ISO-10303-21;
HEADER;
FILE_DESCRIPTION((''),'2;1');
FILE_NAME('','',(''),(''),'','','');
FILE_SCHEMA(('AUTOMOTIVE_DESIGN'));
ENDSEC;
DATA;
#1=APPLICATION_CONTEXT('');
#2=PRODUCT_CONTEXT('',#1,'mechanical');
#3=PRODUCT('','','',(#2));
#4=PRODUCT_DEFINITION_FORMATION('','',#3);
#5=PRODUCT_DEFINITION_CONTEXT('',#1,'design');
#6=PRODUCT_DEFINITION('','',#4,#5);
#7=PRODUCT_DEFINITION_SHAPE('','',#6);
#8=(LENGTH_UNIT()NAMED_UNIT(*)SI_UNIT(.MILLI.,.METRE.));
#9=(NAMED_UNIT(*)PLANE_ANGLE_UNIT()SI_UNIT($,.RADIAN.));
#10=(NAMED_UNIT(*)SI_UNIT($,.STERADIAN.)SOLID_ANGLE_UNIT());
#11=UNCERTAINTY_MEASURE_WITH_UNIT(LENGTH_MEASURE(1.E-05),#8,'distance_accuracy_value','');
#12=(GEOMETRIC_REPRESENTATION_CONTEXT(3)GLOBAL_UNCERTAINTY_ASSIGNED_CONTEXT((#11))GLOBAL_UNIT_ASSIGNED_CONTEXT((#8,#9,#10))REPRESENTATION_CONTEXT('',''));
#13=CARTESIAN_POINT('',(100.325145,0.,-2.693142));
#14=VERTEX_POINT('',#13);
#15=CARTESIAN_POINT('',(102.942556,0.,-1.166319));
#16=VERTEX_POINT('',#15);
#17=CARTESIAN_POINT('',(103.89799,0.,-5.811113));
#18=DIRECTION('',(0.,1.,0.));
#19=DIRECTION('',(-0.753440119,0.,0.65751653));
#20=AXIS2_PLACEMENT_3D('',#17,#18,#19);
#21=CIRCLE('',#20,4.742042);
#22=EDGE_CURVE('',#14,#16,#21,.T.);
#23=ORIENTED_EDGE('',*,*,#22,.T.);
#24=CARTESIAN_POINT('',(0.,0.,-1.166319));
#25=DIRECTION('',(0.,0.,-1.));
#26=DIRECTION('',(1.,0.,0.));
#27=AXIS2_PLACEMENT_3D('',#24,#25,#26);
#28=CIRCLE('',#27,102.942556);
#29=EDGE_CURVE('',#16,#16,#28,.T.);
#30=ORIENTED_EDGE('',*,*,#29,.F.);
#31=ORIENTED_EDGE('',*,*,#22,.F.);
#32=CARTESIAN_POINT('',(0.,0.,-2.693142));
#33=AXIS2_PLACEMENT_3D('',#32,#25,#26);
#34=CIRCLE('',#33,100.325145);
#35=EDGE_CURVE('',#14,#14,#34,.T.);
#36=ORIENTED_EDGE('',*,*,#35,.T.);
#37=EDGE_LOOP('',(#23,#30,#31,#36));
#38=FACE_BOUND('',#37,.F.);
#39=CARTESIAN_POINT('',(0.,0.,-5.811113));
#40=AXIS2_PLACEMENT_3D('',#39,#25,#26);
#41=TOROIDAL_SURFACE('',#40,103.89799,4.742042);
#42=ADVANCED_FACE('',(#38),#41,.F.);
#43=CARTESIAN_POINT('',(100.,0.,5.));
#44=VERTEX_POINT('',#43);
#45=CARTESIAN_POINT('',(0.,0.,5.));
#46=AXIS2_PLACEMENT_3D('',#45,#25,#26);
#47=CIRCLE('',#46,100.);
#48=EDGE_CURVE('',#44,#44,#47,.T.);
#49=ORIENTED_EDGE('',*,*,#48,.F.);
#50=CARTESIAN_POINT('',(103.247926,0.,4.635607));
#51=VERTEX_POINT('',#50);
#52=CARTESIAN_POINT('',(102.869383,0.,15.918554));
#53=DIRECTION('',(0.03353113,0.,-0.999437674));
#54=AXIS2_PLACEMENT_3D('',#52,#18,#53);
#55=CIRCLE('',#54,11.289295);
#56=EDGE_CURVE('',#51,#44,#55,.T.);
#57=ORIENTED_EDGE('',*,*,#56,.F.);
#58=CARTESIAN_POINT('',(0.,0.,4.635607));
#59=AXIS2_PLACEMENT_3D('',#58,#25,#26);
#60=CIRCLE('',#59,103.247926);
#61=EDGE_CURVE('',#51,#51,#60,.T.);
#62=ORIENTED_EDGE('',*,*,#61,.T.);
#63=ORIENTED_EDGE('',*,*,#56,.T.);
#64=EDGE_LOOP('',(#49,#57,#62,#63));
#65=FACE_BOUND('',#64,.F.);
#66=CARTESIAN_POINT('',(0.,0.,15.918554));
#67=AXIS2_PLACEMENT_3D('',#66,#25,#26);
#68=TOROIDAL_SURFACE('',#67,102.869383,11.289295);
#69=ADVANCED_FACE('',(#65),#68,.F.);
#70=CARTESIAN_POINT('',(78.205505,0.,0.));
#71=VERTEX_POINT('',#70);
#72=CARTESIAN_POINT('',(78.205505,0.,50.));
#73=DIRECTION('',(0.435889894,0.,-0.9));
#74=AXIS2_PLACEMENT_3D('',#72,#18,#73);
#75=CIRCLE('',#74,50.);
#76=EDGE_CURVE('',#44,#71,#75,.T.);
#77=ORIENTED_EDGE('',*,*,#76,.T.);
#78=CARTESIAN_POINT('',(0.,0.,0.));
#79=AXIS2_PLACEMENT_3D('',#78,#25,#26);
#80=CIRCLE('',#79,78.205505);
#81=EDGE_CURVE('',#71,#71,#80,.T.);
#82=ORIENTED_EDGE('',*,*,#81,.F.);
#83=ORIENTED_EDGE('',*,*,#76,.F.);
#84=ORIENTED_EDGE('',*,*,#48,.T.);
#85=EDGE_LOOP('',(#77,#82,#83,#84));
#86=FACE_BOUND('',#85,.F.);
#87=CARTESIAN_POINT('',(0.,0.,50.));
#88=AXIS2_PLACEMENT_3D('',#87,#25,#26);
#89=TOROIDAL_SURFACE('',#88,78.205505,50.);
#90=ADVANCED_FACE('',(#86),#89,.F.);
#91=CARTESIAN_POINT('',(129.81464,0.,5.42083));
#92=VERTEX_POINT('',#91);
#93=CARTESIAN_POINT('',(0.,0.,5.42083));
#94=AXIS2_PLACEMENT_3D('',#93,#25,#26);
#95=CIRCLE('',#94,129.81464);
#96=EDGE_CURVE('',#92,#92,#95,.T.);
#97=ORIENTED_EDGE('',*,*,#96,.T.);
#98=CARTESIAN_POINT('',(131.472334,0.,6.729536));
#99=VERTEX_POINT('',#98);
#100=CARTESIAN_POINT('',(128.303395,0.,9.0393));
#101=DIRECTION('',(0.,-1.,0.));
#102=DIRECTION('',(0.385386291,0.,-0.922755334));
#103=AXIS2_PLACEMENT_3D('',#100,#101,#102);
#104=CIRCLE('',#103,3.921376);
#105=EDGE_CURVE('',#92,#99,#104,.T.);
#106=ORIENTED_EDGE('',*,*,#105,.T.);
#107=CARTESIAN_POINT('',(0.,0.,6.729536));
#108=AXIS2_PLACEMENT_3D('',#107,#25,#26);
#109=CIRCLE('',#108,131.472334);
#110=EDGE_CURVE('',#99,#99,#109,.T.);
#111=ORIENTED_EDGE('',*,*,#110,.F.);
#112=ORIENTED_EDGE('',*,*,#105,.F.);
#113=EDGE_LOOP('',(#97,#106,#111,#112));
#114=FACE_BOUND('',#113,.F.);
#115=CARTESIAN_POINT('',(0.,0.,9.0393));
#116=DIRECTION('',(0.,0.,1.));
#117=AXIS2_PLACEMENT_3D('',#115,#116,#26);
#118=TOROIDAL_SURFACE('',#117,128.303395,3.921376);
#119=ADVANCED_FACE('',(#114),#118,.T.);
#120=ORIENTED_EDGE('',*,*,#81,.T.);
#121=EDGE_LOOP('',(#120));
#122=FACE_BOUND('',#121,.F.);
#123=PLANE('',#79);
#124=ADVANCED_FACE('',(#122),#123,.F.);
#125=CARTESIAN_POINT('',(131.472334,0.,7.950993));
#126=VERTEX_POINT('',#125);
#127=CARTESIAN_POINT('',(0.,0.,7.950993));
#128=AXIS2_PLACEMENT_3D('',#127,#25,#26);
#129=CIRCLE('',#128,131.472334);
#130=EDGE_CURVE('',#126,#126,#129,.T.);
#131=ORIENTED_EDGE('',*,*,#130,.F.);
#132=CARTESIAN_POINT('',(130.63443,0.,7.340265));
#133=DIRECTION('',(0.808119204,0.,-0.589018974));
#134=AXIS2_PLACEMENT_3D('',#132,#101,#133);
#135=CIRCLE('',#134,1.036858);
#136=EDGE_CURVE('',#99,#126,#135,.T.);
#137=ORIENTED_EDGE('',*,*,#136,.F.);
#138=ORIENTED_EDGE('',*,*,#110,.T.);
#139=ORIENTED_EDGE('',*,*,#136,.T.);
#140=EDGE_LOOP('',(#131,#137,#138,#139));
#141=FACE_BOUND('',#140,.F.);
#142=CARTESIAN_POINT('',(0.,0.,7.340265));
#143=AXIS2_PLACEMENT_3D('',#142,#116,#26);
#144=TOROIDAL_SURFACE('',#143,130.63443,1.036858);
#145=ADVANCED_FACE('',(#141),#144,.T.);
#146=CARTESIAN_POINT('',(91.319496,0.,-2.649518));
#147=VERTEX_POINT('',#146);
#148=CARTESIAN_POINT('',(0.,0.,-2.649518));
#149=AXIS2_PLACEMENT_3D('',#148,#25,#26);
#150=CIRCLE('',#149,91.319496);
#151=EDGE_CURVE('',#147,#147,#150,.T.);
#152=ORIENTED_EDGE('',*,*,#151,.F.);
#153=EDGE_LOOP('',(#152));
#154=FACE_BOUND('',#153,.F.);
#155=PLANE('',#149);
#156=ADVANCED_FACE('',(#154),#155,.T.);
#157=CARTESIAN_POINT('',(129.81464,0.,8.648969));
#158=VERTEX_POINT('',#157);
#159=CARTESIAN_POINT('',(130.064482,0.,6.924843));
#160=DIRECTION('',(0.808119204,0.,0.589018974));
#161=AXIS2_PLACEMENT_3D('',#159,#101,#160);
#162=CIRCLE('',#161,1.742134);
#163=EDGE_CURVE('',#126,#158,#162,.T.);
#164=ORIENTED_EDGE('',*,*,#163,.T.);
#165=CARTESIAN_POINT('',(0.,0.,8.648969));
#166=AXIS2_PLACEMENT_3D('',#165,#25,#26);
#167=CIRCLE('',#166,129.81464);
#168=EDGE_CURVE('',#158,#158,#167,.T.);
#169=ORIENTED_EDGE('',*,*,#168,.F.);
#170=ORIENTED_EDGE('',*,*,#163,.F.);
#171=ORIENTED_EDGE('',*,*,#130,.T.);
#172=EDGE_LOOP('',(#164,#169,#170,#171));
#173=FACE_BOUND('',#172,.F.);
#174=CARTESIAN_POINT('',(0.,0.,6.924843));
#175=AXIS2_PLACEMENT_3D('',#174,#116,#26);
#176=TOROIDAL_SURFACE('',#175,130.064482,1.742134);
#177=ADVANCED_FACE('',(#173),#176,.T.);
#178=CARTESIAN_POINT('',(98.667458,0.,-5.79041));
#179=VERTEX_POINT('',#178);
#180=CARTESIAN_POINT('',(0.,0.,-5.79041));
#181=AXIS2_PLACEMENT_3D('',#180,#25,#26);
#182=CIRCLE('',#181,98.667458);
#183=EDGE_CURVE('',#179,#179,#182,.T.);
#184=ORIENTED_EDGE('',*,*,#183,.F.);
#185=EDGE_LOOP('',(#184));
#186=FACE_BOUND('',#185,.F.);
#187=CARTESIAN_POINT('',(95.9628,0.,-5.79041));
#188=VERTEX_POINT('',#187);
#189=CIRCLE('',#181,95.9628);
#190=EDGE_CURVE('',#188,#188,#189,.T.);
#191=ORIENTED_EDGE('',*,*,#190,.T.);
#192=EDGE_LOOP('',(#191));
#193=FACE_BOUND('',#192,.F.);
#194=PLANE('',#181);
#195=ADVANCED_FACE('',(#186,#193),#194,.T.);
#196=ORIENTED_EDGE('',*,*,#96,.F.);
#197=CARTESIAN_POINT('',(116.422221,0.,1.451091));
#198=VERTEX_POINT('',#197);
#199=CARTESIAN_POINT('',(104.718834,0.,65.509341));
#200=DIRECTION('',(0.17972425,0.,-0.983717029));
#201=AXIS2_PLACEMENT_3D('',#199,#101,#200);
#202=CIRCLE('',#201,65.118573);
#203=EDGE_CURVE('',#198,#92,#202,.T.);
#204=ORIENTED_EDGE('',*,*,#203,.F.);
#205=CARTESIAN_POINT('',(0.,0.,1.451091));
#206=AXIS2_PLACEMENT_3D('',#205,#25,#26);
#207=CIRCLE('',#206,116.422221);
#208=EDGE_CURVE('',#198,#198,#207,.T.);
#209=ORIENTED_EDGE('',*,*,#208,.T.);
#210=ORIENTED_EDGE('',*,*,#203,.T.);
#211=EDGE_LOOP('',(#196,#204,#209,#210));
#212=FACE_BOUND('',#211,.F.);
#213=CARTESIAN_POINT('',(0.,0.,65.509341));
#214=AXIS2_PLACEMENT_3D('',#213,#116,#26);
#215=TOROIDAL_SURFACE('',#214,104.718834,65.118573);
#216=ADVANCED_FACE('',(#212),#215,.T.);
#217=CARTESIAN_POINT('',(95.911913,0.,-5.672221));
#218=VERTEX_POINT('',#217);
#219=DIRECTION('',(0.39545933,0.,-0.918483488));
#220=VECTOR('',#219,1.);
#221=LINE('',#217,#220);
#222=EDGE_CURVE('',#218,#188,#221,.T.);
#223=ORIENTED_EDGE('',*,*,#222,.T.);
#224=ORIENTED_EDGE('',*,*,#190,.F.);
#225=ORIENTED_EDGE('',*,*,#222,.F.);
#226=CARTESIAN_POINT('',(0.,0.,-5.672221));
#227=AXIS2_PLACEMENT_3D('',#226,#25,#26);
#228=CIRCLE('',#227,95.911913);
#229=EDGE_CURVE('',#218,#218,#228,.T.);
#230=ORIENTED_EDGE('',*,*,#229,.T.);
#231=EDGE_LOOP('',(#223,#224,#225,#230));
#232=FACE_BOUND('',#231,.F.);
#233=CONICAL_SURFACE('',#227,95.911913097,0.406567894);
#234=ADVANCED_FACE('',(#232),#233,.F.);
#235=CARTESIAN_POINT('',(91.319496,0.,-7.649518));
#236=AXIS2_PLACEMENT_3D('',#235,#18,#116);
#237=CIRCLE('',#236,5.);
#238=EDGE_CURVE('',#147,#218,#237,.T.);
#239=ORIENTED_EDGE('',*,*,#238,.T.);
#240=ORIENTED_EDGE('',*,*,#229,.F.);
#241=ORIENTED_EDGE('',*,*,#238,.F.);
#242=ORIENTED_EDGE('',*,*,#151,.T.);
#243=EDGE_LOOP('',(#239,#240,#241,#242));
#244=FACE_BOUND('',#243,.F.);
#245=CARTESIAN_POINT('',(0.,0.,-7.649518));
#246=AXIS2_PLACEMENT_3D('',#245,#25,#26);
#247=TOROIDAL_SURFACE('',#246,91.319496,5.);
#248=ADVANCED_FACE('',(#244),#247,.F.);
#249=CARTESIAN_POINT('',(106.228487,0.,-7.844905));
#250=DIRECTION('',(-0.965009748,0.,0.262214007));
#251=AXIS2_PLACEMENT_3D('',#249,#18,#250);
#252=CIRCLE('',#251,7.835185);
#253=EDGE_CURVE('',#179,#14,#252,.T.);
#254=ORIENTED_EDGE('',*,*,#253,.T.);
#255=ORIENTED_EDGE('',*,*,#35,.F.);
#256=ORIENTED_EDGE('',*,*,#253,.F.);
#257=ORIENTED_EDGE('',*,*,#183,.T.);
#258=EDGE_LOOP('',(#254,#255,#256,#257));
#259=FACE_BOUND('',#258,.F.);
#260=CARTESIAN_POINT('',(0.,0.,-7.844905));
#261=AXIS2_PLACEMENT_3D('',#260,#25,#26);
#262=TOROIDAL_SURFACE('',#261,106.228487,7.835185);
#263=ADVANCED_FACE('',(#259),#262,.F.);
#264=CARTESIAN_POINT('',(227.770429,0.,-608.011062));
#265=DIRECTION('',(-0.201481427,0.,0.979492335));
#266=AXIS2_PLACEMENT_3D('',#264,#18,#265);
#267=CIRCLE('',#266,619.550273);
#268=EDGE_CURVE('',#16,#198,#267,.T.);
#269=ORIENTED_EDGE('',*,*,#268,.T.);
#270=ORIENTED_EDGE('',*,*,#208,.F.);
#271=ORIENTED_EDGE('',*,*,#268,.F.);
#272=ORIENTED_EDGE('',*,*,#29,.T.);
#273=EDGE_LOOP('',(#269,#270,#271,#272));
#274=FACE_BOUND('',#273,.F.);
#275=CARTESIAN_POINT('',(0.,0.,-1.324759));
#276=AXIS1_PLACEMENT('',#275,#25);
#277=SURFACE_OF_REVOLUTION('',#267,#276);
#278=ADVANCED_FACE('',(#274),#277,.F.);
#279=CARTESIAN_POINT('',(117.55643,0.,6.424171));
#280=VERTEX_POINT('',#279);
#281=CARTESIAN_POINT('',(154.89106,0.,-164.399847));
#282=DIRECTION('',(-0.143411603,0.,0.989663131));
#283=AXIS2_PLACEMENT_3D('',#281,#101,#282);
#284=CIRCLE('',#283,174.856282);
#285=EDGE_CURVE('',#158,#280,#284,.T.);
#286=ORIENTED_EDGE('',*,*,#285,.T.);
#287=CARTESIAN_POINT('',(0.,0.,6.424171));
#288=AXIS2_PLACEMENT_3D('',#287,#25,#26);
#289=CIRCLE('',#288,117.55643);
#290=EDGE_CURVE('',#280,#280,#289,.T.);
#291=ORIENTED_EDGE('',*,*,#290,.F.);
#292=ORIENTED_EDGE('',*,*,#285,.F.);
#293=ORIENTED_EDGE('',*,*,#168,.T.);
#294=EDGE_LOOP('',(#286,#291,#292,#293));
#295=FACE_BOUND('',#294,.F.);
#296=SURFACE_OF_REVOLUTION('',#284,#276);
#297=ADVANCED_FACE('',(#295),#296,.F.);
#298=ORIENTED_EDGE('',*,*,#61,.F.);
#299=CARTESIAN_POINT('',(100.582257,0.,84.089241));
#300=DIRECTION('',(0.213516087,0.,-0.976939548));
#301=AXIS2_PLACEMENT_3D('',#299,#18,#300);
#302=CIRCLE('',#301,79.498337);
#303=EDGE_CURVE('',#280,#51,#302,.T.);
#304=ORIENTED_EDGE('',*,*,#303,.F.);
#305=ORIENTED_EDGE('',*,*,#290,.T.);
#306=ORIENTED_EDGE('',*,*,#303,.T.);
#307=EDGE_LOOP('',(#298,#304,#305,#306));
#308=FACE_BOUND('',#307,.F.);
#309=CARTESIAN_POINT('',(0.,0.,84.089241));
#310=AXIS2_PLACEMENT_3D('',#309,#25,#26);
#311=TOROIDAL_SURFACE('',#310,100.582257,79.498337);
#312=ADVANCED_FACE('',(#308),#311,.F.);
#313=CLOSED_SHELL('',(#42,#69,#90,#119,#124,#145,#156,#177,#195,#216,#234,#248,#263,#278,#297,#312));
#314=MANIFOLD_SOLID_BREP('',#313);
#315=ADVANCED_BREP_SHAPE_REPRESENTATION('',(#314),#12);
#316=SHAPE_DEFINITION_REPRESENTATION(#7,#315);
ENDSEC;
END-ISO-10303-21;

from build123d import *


# Not quite as in the source:
# - a fillet or chamfer that OpenCascade refuses, or shapes differently, is made with other operations: its cross-section is extruded or revolved along the edge and cut away or added


with BuildPart() as f1:
    # F0 (on Front) → F1 (revolve)
    with BuildSketch(Plane.XZ):
        with BuildLine():
            Line((100, 0), (0, 0))
            Line((0, 0), (0, -2.6495179627))
            Line((0, -2.6495179627), (91.3194956564, -2.6495179627))
            ThreePointArc((91.3194956564, -2.6495179627), (94.0684515249, -3.473007262), (95.9119130966, -5.6722213094))
            Line((95.9119130966, -5.6722213094), (95.9628000855, -5.7904100977))
            Line((95.9628000855, -5.7904100977), (98.6674576998, -5.7904100977))
            ThreePointArc((98.6674576998, -5.7904100977), (99.3204777078, -4.1476735329), (100.3251448274, -2.6931418106))
            ThreePointArc((100.3251448274, -2.6931418106), (101.5086125026, -1.71503666), (102.9425561428, -1.1663190089))
            ThreePointArc((102.9425561428, -1.1663190089), (109.6751369936, 0.1797320354), (116.4222210646, 1.4510914916))
            ThreePointArc((116.4222210646, 1.4510914916), (123.2251802907, 3.0758263676), (129.8146396875, 5.4208301008))
            ThreePointArc((129.8146396875, 5.4208301008), (130.7332526352, 5.961479711), (131.4723342657, 6.7295357585))
            ThreePointArc((131.4723342657, 6.7295357585), (131.6712873102, 7.3402645066), (131.4723342657, 7.9509932548))
            ThreePointArc((131.4723342657, 7.9509932548), (130.7405288737, 8.5304559761), (129.8146396875, 8.648969233))
            ThreePointArc((129.8146396875, 8.648969233), (123.6657142098, 7.6457790436), (117.5564303994, 6.4241709188))
            ThreePointArc((117.5564303994, 6.4241709188), (110.44281422, 5.2047996177), (103.2479256392, 4.6356073581))
            ThreePointArc((103.2479256392, 4.6356073581), (101.6107063419, 4.6996452731), (100, 5))
            Line((100, 5), (100, 0))
        make_face()
    revolve(axis=Axis((0, 0, -1.3247589814), (0, 0, -1)))

    # F2: fillet of radius 50 on 1 edges, made by hand

    # F2_s1 → F2_t2 (revolve)
    with BuildSketch(Plane.XZ):
        with BuildLine():
            ThreePointArc((100, 5), (89.3858451698, 1.266028276), (78.2055052823, 0))
            Line((78.2055052823, 0), (78.2055052823, -1))
            Line((78.2055052823, -1), (100, -1))
            Line((100, -1), (101, 0))
            ThreePointArc((101, 0), (101, 2.5), (100.4358898944, 4.1))
            Line((100.4358898944, 4.1), (100, 5))
        make_face()
    revolve(axis=Axis((0, 0, 0), (0, 0, -1)))


solid = f1.part
